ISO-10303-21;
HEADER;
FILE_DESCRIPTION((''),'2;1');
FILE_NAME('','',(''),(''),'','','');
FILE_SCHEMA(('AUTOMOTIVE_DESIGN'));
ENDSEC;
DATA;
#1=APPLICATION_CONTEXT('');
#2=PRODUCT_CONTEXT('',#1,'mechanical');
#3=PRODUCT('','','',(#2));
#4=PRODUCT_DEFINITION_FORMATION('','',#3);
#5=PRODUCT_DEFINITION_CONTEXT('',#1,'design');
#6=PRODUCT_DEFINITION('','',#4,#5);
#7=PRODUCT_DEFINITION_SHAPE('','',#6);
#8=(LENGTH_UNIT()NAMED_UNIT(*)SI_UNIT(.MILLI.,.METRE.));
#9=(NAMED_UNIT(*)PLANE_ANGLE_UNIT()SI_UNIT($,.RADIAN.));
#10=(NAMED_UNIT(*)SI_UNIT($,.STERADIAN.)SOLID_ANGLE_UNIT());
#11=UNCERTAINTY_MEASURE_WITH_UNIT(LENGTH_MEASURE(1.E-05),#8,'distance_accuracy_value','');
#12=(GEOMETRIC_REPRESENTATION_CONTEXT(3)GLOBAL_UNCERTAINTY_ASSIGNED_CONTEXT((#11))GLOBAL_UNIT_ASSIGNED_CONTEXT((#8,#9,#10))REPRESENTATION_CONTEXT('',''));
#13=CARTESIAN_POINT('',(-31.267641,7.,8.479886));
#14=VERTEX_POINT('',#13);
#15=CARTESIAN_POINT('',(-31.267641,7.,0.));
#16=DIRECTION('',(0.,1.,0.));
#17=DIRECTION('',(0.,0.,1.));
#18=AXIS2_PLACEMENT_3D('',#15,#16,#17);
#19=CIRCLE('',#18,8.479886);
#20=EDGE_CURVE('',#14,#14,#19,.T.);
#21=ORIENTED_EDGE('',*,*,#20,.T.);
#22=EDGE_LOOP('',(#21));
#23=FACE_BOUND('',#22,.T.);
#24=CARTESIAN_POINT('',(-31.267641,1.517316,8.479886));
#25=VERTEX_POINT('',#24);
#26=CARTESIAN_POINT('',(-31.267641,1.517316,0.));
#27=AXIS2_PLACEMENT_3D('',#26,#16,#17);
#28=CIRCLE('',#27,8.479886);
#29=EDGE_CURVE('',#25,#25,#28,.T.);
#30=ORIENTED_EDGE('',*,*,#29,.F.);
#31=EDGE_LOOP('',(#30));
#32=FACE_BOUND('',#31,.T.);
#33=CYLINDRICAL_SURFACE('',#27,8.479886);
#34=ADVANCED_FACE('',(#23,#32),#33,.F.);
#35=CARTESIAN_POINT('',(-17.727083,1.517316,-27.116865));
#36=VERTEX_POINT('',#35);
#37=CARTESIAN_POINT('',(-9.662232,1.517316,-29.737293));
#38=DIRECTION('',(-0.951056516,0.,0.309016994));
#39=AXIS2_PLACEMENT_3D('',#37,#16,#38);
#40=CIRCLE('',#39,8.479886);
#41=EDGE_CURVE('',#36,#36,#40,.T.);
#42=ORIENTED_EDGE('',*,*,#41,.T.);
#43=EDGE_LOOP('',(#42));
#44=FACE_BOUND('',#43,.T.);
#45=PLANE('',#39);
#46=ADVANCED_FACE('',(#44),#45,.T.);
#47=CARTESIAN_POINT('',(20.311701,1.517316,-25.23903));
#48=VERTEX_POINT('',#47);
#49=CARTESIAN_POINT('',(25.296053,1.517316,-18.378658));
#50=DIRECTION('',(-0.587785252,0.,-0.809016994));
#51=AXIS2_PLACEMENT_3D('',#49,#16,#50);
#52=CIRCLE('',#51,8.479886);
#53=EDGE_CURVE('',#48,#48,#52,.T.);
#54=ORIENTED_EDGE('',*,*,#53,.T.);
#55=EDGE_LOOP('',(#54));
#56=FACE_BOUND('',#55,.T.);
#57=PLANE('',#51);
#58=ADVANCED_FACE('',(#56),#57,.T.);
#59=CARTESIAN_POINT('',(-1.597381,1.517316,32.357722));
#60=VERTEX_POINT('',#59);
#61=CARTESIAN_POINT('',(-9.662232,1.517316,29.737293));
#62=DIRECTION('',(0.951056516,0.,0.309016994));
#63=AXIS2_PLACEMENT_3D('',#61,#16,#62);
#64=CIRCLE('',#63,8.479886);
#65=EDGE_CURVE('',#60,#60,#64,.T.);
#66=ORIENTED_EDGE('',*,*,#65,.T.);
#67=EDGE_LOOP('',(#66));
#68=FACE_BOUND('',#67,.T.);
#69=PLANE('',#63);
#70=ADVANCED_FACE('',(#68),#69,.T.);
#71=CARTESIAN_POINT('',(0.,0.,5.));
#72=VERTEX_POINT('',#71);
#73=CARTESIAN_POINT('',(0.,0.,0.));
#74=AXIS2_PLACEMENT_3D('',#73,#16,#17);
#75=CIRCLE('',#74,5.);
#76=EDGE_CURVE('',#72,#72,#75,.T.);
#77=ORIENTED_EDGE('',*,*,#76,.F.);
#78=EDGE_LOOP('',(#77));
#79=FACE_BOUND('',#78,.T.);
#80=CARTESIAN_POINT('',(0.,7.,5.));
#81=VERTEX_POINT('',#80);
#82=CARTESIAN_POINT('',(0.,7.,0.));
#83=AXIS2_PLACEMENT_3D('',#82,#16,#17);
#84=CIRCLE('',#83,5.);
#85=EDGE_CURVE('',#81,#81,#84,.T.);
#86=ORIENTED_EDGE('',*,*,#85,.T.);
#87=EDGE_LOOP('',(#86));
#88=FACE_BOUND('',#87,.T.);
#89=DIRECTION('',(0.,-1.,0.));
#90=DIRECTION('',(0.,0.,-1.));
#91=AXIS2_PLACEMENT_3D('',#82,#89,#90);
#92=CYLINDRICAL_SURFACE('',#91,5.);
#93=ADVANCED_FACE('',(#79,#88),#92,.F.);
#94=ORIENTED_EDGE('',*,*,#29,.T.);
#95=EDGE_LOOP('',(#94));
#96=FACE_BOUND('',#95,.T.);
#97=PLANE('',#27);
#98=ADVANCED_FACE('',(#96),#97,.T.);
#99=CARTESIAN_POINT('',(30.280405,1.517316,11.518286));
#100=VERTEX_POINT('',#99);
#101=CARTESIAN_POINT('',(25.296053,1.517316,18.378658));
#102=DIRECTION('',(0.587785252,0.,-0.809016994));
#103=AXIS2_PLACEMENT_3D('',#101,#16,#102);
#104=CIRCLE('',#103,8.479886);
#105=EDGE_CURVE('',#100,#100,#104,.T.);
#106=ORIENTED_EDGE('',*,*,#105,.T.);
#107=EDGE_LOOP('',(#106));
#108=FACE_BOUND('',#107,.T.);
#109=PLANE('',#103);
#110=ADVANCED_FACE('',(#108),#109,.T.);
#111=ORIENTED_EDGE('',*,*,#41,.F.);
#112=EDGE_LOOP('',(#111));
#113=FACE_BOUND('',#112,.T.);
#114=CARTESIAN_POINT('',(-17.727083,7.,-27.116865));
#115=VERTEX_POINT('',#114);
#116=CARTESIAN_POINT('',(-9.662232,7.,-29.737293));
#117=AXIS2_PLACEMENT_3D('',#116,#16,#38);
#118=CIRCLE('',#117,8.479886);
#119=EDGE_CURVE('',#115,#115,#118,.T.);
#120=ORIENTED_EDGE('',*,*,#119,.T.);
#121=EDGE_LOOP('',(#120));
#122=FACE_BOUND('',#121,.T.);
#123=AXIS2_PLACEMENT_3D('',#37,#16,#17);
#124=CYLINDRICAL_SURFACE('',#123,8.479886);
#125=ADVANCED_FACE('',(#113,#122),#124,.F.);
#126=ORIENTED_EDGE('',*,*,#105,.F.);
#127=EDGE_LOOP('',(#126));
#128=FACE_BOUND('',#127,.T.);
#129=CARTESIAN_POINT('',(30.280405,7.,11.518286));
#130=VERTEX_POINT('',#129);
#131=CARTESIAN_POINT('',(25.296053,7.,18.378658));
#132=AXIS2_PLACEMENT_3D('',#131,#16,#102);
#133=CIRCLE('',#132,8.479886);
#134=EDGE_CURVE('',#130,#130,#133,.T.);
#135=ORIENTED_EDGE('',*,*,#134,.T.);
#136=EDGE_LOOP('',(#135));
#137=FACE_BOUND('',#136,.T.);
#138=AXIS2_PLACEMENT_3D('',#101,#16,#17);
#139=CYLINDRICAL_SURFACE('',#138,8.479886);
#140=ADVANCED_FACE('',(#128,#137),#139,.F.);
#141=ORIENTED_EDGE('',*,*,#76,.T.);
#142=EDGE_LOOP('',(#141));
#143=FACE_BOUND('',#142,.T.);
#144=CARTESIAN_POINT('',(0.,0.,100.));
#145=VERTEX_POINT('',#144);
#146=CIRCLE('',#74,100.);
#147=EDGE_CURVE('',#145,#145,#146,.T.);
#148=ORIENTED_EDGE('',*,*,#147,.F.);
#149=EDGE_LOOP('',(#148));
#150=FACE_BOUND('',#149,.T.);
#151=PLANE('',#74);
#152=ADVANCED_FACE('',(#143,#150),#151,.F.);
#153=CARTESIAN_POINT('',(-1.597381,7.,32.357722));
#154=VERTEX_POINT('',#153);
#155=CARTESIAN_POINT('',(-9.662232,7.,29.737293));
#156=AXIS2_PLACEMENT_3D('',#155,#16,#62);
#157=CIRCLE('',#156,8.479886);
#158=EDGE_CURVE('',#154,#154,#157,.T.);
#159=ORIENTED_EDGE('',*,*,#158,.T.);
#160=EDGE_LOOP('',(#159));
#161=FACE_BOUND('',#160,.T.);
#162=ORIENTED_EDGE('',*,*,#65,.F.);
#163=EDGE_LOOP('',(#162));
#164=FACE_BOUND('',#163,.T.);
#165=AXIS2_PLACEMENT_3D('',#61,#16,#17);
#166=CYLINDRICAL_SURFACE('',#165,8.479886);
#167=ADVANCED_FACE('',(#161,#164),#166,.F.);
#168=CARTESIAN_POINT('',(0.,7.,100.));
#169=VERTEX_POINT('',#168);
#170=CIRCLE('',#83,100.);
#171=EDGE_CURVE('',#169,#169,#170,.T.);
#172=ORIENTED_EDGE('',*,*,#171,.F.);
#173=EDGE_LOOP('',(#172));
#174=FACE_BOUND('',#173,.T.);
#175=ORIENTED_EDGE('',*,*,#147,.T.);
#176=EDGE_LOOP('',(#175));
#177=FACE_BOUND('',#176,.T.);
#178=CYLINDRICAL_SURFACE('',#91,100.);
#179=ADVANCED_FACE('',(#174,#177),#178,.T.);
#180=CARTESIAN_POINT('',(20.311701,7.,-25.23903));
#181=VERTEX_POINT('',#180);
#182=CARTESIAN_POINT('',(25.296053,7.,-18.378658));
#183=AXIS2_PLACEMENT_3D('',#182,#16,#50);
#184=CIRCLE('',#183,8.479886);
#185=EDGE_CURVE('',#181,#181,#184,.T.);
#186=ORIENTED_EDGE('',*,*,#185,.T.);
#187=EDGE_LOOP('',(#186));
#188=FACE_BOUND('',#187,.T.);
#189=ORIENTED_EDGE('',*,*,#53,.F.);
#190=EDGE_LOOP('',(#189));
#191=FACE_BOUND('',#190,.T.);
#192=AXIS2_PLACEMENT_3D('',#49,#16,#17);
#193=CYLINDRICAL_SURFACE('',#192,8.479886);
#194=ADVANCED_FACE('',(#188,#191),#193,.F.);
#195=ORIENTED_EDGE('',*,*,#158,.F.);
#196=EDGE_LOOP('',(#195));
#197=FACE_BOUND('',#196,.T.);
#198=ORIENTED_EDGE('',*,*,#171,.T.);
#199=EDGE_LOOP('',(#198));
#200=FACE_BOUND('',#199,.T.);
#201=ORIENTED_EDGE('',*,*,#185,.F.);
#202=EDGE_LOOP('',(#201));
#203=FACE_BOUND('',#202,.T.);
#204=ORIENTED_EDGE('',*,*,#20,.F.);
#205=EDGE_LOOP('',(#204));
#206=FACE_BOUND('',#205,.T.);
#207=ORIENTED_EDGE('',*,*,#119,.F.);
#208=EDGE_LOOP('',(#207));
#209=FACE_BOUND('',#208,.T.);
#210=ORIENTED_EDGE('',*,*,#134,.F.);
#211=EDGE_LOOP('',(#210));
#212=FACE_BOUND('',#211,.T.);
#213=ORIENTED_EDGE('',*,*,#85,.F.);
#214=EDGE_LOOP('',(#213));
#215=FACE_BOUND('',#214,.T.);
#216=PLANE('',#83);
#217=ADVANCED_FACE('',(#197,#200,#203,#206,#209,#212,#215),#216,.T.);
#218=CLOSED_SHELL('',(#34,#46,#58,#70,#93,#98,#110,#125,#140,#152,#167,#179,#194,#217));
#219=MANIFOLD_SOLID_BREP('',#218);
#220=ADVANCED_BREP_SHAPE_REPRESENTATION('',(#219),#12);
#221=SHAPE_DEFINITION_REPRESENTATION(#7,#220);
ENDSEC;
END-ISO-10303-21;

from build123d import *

# Parameters (mm, degrees)
SKETCH1_R           = 100
BOSS_EXTRUDE1_DEPTH = 7
SKETCH2_R           = 5
CUT_EXTRUDE1_DEPTH  = 142.594491418
SKETCH3_R           = 8.479886046
CUT_EXTRUDE2_DEPTH  = 5.482683901
CIRPATTERN1_COUNT   = 5


with BuildPart() as part:
    # Sketch1 → Boss-Extrude1 (new body)
    with BuildSketch(Plane(origin=(0, 0, 0), x_dir=(1, 0, 0), z_dir=(0, 1, 0))):
        Circle(SKETCH1_R)
    extrude(amount=BOSS_EXTRUDE1_DEPTH)

    # Sketch2 → Cut-Extrude1 (cut, through all)
    with BuildSketch(Plane(origin=(0, 0, 0), x_dir=(1, 0, 0), z_dir=(0, 1, 0))):
        Circle(SKETCH2_R)
    extrude(amount=CUT_EXTRUDE1_DEPTH, mode=Mode.SUBTRACT)

    # Sketch3 → Cut-Extrude2 (cut)
    with BuildSketch(Plane(origin=(0, 7, 0), x_dir=(1, 0, 0), z_dir=(0, 1, 0))):
        with Locations((-31.267640686, 0)):
            Circle(SKETCH3_R)
    cut_extrude2 = extrude(amount=-CUT_EXTRUDE2_DEPTH, mode=Mode.SUBTRACT)

    # CirPattern1: Cut-Extrude2 ×5 about axis
    cirpattern1_axis = Axis((0, 0, 0), (0, 1, 0))
    for i in range(1, CIRPATTERN1_COUNT):
        add(cut_extrude2.rotate(cirpattern1_axis, i * 360 / CIRPATTERN1_COUNT), mode=Mode.SUBTRACT)


solid = part.part
